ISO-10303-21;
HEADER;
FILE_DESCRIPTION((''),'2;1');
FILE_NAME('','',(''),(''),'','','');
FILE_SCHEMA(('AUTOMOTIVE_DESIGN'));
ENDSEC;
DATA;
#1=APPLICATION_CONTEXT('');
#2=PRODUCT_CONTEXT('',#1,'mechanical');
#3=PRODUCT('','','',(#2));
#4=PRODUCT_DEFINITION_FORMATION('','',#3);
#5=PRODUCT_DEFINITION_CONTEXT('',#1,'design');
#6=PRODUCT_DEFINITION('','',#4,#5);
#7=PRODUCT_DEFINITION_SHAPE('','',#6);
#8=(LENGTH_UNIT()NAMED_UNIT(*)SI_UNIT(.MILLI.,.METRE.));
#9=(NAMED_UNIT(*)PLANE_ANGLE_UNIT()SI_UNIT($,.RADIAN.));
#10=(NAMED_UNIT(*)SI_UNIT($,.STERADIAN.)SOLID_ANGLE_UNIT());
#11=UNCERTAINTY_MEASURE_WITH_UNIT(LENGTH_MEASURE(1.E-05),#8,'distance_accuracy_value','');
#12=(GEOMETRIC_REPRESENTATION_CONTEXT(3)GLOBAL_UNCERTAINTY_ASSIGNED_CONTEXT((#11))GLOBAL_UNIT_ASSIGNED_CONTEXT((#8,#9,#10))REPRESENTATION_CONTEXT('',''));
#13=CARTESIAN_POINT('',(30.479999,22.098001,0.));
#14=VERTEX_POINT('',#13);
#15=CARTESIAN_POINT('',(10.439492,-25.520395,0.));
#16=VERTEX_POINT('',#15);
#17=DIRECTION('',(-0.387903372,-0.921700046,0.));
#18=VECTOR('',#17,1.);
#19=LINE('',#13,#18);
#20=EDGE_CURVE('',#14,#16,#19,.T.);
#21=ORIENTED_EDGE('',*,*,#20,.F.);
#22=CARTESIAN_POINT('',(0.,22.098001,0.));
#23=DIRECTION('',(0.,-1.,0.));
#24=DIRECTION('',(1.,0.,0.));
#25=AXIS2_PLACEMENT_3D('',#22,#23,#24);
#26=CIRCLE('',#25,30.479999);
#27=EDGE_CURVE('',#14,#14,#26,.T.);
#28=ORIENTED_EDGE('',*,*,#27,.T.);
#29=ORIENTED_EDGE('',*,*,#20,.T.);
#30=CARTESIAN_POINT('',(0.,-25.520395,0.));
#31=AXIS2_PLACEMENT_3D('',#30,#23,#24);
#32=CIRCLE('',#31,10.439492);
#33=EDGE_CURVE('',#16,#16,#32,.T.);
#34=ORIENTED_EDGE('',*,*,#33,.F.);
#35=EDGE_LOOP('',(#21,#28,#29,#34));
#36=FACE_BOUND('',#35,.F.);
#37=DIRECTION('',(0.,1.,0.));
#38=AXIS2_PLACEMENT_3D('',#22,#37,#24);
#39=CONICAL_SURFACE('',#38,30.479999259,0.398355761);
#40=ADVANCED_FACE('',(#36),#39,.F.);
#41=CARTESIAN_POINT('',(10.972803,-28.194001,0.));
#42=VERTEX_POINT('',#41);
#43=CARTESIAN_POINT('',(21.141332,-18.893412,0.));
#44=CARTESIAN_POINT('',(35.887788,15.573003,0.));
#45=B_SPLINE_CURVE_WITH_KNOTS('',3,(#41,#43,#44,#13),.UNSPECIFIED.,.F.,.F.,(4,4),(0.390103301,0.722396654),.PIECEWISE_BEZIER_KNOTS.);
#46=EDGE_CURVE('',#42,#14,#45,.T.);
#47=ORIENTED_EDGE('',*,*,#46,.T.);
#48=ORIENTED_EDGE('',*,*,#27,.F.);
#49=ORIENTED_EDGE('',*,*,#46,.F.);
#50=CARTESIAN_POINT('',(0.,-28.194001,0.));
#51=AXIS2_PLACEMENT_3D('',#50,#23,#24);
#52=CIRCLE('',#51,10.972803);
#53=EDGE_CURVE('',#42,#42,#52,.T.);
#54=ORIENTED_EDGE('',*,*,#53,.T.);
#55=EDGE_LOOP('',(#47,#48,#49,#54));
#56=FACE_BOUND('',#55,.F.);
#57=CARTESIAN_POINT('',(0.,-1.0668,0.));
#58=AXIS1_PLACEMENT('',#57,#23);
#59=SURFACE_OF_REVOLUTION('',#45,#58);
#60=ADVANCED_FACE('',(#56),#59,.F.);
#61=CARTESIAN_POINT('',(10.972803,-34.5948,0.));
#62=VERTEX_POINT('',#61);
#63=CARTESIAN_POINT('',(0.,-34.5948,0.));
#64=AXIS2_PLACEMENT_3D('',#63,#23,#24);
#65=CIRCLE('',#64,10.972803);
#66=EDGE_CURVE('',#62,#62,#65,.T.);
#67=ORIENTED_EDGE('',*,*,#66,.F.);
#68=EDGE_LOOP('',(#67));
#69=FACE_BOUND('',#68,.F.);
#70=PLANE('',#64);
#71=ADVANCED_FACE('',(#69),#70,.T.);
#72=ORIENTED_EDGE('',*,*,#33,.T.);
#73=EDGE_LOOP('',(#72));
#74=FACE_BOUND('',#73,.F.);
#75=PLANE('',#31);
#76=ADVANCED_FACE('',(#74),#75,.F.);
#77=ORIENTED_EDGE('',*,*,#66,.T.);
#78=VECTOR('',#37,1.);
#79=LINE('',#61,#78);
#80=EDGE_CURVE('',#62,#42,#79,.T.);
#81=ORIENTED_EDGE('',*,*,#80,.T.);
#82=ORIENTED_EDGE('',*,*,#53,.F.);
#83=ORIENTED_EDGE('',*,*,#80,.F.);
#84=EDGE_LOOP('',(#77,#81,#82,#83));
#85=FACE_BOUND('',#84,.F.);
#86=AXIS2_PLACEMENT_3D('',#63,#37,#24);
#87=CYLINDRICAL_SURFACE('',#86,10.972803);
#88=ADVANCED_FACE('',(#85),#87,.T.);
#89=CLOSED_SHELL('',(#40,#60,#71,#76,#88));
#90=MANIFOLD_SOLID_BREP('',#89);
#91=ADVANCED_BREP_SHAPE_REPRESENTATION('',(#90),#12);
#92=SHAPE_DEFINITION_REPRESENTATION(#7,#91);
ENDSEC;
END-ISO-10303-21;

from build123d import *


with BuildPart() as f1:
    # F0 (on Top) → F1 (revolve)
    with BuildSketch(Plane.XY):
        with BuildLine():
            Line((10.4394918308, -25.5203954875), (0, -25.5203954875))
            Line((0, -25.5203954875), (0, -28.1940009445))
            Line((0, -28.1940009445), (10.9728025272, -28.1940009445))
            add(Edge.make_bspline(
                [(10.9728025272, -28.1940009445), (21.1413321645, -18.8934123486), (35.8877876093, 15.5730034128), (30.4799992591, 22.0980010927)],
                knots=[0.3901033008, 0.3901033008, 0.3901033008, 0.3901033008, 0.7223966542, 0.7223966542, 0.7223966542, 0.7223966542], degree=3))
            Line((30.4799992591, 22.0980010927), (10.4394918308, -25.5203954875))
        make_face()
        with BuildLine():
            add(Edge.make_bspline(
                [(0, -28.1940009445), (2.7316766907, -31.4643099771), (6.3866282791, -32.388719496), (10.9728025272, -28.1940009445)],
                knots=[0.2402335286, 0.2402335286, 0.2402335286, 0.2402335286, 0.3901033008, 0.3901033008, 0.3901033008, 0.3901033008], degree=3))
            Line((0, -28.1940009445), (0, -34.5948003232))
            Line((0, -34.5948003232), (10.9728025272, -34.5948003232))
            Line((10.9728025272, -34.5948003232), (10.9728025272, -28.1940009445))
        make_face()
        with BuildLine():
            Line((10.9728025272, -28.1940009445), (0, -28.1940009445))
            add(Edge.make_bspline(
                [(0, -28.1940009445), (2.7316766907, -31.4643099771), (6.3866282791, -32.388719496), (10.9728025272, -28.1940009445)],
                knots=[0.2402335286, 0.2402335286, 0.2402335286, 0.2402335286, 0.3901033008, 0.3901033008, 0.3901033008, 0.3901033008], degree=3))
        make_face()
    revolve(axis=Axis((0, -1.0668002069, 0), (0, -1, 0)))


solid = f1.part
